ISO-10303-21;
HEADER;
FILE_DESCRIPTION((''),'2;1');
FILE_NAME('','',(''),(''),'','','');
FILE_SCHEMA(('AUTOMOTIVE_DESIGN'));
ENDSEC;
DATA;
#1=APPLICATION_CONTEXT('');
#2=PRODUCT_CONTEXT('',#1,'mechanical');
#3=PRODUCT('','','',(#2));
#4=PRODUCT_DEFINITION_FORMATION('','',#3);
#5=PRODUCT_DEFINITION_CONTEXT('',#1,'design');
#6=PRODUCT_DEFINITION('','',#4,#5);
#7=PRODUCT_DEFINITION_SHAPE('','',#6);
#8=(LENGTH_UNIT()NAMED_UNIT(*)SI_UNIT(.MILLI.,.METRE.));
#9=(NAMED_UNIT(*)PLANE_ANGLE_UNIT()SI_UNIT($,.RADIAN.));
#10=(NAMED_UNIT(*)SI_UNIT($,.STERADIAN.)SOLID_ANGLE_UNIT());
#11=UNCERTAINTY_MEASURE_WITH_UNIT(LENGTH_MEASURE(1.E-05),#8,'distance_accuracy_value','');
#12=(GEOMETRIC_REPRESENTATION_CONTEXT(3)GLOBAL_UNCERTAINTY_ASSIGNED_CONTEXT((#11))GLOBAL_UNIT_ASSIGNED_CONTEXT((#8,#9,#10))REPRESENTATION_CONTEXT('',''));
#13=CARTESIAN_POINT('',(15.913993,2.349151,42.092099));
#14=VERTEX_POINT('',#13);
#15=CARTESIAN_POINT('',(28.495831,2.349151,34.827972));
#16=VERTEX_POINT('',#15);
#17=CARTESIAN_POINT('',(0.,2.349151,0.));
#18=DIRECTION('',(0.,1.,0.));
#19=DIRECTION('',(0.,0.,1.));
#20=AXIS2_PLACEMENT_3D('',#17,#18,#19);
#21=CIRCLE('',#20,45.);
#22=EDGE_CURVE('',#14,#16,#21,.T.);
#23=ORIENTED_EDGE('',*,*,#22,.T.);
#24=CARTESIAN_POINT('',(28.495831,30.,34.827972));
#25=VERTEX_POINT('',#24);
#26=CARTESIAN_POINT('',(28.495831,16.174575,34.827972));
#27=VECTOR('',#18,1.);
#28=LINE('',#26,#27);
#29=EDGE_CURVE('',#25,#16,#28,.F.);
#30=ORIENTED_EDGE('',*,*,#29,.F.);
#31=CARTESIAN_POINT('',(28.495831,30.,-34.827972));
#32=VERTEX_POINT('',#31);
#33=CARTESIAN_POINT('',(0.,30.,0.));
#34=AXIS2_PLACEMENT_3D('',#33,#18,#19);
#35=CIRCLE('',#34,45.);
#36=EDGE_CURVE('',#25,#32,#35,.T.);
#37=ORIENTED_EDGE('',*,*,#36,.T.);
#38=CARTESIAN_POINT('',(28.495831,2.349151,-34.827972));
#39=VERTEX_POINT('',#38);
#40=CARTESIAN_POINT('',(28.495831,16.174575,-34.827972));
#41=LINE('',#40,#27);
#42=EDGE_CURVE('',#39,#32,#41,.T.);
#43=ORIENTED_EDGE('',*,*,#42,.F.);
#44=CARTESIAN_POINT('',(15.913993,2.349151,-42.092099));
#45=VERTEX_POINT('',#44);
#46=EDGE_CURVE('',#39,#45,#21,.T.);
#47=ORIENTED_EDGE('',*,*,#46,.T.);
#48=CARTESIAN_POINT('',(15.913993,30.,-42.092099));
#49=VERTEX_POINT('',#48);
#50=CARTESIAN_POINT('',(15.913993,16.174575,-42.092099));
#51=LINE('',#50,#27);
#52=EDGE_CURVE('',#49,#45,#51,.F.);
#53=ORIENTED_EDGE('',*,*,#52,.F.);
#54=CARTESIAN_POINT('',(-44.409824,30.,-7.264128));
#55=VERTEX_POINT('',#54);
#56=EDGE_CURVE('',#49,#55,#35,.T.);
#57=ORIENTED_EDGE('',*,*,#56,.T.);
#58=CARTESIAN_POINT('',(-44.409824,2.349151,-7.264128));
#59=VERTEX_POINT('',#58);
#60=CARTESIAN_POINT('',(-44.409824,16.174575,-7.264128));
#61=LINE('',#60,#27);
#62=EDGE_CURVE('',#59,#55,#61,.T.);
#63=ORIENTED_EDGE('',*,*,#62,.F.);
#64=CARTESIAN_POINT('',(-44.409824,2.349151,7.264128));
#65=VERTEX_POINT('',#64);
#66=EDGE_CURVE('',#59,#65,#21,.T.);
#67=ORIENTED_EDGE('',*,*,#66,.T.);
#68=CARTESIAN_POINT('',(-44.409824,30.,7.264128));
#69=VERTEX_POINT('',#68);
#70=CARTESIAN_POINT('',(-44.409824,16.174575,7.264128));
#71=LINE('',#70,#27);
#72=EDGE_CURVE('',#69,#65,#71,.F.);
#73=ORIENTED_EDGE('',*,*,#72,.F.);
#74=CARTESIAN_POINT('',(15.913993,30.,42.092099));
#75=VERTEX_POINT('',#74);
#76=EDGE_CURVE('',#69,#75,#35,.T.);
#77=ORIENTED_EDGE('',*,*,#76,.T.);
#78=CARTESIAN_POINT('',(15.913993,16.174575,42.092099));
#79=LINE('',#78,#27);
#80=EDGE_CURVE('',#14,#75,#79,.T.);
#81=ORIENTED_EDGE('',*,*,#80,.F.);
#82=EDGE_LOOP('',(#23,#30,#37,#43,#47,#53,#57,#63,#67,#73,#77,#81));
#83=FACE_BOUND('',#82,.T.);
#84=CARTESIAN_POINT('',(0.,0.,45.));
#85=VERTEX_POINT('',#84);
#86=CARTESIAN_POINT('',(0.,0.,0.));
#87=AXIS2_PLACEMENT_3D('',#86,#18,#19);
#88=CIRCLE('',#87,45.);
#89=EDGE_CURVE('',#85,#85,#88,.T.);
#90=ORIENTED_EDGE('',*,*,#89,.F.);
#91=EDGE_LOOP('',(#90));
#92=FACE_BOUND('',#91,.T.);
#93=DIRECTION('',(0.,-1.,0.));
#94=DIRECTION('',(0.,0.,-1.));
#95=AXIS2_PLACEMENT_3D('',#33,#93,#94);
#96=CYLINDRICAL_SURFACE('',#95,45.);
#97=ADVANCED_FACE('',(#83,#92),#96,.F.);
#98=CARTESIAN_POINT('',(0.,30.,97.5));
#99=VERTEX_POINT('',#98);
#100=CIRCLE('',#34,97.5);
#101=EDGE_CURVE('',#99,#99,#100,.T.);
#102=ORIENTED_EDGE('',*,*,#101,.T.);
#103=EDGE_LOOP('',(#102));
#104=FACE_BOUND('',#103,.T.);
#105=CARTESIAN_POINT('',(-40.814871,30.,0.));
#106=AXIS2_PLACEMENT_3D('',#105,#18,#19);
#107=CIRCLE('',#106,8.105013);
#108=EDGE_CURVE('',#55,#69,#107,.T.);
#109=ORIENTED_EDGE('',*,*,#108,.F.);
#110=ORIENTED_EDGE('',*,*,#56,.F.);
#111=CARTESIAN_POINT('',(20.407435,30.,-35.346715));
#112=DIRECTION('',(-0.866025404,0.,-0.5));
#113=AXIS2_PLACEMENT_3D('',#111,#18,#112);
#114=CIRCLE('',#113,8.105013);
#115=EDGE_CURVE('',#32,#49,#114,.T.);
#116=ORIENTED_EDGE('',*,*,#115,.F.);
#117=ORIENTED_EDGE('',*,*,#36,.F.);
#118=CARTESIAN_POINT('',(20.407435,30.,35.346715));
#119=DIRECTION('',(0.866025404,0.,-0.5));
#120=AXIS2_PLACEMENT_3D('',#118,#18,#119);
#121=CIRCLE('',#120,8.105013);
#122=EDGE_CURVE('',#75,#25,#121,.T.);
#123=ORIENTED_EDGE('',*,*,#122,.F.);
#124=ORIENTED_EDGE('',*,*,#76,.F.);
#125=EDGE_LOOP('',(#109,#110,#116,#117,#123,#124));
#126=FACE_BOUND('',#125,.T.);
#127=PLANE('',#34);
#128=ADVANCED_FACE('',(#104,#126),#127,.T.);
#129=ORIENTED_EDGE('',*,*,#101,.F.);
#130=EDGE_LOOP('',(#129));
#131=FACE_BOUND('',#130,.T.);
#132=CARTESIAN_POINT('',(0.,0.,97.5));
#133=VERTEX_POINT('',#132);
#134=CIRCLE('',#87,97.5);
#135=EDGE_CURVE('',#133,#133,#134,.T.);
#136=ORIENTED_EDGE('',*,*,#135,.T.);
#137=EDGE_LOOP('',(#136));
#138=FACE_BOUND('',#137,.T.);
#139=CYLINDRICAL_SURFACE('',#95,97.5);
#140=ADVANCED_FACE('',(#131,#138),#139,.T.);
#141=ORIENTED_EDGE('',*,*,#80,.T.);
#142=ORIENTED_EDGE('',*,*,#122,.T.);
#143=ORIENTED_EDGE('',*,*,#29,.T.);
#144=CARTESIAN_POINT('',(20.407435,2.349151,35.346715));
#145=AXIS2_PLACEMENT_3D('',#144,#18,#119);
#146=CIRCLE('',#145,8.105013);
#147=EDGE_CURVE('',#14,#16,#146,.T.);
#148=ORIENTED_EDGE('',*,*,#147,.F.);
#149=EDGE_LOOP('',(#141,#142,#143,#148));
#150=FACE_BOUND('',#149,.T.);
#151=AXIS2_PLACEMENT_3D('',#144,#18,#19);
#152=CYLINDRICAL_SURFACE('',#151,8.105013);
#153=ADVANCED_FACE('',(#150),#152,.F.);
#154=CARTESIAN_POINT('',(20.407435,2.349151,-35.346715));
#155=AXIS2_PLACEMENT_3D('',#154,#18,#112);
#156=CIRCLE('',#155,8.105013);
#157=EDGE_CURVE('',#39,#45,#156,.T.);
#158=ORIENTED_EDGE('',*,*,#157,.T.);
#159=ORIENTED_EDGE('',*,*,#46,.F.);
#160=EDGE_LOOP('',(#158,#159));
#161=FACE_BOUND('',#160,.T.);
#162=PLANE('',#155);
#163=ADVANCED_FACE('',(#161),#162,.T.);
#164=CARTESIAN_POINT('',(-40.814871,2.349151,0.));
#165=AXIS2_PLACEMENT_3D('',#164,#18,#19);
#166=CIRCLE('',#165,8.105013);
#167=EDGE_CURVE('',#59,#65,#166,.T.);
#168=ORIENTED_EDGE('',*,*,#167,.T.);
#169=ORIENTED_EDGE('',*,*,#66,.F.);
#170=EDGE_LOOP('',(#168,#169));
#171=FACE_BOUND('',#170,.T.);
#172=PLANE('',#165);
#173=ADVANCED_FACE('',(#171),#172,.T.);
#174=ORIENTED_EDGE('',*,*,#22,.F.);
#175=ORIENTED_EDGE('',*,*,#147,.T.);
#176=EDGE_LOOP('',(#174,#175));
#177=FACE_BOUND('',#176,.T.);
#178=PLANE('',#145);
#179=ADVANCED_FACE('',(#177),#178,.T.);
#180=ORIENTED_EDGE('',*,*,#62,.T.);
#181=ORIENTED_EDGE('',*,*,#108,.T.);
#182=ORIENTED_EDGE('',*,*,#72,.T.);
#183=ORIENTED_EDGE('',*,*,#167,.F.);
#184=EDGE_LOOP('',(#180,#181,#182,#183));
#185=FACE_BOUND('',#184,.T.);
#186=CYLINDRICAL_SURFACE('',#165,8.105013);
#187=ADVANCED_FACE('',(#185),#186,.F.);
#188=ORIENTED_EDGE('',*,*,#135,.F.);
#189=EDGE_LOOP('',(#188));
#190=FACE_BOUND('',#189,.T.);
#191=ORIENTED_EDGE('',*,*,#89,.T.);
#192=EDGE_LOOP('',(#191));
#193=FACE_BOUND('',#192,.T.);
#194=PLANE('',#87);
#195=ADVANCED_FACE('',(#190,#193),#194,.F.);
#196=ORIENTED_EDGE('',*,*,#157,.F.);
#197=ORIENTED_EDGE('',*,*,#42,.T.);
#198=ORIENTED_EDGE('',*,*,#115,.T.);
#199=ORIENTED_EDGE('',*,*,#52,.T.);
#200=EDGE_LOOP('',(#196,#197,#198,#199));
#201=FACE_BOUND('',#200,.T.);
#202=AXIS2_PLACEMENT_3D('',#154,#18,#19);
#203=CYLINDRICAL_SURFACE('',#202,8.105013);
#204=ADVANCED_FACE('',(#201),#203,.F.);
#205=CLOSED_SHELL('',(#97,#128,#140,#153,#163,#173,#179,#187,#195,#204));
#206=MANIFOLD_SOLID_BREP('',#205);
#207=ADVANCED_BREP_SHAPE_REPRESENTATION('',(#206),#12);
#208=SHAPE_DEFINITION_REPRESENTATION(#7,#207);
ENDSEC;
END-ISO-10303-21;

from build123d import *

# Parameters (mm, degrees)
SKETCH1_R           = 97.5
BOSS_EXTRUDE1_DEPTH = 30
SKETCH2_R           = 45
CUT_EXTRUDE1_DEPTH  = 142.111657917
SKETCH3_R           = 8.105013215
CUT_EXTRUDE2_DEPTH  = 27.650849265
CIRPATTERN1_COUNT   = 3


with BuildPart() as part:
    # Sketch1 → Boss-Extrude1 (new body)
    with BuildSketch(Plane(origin=(0, 0, 0), x_dir=(1, 0, 0), z_dir=(0, 1, 0))):
        Circle(SKETCH1_R)
    extrude(amount=BOSS_EXTRUDE1_DEPTH)

    # Sketch2 → Cut-Extrude1 (cut, through all)
    with BuildSketch(Plane(origin=(0, 0, 0), x_dir=(1, 0, 0), z_dir=(0, 1, 0))):
        Circle(SKETCH2_R)
    extrude(amount=CUT_EXTRUDE1_DEPTH, mode=Mode.SUBTRACT)

    # Sketch3 → Cut-Extrude2 (cut)
    with BuildSketch(Plane(origin=(0, 30, 0), x_dir=(1, 0, 0), z_dir=(0, 1, 0))):
        with Locations((-40.814870725, 0)):
            Circle(SKETCH3_R)
    cut_extrude2 = extrude(amount=-CUT_EXTRUDE2_DEPTH, mode=Mode.SUBTRACT)

    # CirPattern1: Cut-Extrude2 ×3 about axis
    cirpattern1_axis = Axis((0, 0, 0), (0, 1, 0))
    for i in range(1, CIRPATTERN1_COUNT):
        add(cut_extrude2.rotate(cirpattern1_axis, i * 360 / CIRPATTERN1_COUNT), mode=Mode.SUBTRACT)


solid = part.part
